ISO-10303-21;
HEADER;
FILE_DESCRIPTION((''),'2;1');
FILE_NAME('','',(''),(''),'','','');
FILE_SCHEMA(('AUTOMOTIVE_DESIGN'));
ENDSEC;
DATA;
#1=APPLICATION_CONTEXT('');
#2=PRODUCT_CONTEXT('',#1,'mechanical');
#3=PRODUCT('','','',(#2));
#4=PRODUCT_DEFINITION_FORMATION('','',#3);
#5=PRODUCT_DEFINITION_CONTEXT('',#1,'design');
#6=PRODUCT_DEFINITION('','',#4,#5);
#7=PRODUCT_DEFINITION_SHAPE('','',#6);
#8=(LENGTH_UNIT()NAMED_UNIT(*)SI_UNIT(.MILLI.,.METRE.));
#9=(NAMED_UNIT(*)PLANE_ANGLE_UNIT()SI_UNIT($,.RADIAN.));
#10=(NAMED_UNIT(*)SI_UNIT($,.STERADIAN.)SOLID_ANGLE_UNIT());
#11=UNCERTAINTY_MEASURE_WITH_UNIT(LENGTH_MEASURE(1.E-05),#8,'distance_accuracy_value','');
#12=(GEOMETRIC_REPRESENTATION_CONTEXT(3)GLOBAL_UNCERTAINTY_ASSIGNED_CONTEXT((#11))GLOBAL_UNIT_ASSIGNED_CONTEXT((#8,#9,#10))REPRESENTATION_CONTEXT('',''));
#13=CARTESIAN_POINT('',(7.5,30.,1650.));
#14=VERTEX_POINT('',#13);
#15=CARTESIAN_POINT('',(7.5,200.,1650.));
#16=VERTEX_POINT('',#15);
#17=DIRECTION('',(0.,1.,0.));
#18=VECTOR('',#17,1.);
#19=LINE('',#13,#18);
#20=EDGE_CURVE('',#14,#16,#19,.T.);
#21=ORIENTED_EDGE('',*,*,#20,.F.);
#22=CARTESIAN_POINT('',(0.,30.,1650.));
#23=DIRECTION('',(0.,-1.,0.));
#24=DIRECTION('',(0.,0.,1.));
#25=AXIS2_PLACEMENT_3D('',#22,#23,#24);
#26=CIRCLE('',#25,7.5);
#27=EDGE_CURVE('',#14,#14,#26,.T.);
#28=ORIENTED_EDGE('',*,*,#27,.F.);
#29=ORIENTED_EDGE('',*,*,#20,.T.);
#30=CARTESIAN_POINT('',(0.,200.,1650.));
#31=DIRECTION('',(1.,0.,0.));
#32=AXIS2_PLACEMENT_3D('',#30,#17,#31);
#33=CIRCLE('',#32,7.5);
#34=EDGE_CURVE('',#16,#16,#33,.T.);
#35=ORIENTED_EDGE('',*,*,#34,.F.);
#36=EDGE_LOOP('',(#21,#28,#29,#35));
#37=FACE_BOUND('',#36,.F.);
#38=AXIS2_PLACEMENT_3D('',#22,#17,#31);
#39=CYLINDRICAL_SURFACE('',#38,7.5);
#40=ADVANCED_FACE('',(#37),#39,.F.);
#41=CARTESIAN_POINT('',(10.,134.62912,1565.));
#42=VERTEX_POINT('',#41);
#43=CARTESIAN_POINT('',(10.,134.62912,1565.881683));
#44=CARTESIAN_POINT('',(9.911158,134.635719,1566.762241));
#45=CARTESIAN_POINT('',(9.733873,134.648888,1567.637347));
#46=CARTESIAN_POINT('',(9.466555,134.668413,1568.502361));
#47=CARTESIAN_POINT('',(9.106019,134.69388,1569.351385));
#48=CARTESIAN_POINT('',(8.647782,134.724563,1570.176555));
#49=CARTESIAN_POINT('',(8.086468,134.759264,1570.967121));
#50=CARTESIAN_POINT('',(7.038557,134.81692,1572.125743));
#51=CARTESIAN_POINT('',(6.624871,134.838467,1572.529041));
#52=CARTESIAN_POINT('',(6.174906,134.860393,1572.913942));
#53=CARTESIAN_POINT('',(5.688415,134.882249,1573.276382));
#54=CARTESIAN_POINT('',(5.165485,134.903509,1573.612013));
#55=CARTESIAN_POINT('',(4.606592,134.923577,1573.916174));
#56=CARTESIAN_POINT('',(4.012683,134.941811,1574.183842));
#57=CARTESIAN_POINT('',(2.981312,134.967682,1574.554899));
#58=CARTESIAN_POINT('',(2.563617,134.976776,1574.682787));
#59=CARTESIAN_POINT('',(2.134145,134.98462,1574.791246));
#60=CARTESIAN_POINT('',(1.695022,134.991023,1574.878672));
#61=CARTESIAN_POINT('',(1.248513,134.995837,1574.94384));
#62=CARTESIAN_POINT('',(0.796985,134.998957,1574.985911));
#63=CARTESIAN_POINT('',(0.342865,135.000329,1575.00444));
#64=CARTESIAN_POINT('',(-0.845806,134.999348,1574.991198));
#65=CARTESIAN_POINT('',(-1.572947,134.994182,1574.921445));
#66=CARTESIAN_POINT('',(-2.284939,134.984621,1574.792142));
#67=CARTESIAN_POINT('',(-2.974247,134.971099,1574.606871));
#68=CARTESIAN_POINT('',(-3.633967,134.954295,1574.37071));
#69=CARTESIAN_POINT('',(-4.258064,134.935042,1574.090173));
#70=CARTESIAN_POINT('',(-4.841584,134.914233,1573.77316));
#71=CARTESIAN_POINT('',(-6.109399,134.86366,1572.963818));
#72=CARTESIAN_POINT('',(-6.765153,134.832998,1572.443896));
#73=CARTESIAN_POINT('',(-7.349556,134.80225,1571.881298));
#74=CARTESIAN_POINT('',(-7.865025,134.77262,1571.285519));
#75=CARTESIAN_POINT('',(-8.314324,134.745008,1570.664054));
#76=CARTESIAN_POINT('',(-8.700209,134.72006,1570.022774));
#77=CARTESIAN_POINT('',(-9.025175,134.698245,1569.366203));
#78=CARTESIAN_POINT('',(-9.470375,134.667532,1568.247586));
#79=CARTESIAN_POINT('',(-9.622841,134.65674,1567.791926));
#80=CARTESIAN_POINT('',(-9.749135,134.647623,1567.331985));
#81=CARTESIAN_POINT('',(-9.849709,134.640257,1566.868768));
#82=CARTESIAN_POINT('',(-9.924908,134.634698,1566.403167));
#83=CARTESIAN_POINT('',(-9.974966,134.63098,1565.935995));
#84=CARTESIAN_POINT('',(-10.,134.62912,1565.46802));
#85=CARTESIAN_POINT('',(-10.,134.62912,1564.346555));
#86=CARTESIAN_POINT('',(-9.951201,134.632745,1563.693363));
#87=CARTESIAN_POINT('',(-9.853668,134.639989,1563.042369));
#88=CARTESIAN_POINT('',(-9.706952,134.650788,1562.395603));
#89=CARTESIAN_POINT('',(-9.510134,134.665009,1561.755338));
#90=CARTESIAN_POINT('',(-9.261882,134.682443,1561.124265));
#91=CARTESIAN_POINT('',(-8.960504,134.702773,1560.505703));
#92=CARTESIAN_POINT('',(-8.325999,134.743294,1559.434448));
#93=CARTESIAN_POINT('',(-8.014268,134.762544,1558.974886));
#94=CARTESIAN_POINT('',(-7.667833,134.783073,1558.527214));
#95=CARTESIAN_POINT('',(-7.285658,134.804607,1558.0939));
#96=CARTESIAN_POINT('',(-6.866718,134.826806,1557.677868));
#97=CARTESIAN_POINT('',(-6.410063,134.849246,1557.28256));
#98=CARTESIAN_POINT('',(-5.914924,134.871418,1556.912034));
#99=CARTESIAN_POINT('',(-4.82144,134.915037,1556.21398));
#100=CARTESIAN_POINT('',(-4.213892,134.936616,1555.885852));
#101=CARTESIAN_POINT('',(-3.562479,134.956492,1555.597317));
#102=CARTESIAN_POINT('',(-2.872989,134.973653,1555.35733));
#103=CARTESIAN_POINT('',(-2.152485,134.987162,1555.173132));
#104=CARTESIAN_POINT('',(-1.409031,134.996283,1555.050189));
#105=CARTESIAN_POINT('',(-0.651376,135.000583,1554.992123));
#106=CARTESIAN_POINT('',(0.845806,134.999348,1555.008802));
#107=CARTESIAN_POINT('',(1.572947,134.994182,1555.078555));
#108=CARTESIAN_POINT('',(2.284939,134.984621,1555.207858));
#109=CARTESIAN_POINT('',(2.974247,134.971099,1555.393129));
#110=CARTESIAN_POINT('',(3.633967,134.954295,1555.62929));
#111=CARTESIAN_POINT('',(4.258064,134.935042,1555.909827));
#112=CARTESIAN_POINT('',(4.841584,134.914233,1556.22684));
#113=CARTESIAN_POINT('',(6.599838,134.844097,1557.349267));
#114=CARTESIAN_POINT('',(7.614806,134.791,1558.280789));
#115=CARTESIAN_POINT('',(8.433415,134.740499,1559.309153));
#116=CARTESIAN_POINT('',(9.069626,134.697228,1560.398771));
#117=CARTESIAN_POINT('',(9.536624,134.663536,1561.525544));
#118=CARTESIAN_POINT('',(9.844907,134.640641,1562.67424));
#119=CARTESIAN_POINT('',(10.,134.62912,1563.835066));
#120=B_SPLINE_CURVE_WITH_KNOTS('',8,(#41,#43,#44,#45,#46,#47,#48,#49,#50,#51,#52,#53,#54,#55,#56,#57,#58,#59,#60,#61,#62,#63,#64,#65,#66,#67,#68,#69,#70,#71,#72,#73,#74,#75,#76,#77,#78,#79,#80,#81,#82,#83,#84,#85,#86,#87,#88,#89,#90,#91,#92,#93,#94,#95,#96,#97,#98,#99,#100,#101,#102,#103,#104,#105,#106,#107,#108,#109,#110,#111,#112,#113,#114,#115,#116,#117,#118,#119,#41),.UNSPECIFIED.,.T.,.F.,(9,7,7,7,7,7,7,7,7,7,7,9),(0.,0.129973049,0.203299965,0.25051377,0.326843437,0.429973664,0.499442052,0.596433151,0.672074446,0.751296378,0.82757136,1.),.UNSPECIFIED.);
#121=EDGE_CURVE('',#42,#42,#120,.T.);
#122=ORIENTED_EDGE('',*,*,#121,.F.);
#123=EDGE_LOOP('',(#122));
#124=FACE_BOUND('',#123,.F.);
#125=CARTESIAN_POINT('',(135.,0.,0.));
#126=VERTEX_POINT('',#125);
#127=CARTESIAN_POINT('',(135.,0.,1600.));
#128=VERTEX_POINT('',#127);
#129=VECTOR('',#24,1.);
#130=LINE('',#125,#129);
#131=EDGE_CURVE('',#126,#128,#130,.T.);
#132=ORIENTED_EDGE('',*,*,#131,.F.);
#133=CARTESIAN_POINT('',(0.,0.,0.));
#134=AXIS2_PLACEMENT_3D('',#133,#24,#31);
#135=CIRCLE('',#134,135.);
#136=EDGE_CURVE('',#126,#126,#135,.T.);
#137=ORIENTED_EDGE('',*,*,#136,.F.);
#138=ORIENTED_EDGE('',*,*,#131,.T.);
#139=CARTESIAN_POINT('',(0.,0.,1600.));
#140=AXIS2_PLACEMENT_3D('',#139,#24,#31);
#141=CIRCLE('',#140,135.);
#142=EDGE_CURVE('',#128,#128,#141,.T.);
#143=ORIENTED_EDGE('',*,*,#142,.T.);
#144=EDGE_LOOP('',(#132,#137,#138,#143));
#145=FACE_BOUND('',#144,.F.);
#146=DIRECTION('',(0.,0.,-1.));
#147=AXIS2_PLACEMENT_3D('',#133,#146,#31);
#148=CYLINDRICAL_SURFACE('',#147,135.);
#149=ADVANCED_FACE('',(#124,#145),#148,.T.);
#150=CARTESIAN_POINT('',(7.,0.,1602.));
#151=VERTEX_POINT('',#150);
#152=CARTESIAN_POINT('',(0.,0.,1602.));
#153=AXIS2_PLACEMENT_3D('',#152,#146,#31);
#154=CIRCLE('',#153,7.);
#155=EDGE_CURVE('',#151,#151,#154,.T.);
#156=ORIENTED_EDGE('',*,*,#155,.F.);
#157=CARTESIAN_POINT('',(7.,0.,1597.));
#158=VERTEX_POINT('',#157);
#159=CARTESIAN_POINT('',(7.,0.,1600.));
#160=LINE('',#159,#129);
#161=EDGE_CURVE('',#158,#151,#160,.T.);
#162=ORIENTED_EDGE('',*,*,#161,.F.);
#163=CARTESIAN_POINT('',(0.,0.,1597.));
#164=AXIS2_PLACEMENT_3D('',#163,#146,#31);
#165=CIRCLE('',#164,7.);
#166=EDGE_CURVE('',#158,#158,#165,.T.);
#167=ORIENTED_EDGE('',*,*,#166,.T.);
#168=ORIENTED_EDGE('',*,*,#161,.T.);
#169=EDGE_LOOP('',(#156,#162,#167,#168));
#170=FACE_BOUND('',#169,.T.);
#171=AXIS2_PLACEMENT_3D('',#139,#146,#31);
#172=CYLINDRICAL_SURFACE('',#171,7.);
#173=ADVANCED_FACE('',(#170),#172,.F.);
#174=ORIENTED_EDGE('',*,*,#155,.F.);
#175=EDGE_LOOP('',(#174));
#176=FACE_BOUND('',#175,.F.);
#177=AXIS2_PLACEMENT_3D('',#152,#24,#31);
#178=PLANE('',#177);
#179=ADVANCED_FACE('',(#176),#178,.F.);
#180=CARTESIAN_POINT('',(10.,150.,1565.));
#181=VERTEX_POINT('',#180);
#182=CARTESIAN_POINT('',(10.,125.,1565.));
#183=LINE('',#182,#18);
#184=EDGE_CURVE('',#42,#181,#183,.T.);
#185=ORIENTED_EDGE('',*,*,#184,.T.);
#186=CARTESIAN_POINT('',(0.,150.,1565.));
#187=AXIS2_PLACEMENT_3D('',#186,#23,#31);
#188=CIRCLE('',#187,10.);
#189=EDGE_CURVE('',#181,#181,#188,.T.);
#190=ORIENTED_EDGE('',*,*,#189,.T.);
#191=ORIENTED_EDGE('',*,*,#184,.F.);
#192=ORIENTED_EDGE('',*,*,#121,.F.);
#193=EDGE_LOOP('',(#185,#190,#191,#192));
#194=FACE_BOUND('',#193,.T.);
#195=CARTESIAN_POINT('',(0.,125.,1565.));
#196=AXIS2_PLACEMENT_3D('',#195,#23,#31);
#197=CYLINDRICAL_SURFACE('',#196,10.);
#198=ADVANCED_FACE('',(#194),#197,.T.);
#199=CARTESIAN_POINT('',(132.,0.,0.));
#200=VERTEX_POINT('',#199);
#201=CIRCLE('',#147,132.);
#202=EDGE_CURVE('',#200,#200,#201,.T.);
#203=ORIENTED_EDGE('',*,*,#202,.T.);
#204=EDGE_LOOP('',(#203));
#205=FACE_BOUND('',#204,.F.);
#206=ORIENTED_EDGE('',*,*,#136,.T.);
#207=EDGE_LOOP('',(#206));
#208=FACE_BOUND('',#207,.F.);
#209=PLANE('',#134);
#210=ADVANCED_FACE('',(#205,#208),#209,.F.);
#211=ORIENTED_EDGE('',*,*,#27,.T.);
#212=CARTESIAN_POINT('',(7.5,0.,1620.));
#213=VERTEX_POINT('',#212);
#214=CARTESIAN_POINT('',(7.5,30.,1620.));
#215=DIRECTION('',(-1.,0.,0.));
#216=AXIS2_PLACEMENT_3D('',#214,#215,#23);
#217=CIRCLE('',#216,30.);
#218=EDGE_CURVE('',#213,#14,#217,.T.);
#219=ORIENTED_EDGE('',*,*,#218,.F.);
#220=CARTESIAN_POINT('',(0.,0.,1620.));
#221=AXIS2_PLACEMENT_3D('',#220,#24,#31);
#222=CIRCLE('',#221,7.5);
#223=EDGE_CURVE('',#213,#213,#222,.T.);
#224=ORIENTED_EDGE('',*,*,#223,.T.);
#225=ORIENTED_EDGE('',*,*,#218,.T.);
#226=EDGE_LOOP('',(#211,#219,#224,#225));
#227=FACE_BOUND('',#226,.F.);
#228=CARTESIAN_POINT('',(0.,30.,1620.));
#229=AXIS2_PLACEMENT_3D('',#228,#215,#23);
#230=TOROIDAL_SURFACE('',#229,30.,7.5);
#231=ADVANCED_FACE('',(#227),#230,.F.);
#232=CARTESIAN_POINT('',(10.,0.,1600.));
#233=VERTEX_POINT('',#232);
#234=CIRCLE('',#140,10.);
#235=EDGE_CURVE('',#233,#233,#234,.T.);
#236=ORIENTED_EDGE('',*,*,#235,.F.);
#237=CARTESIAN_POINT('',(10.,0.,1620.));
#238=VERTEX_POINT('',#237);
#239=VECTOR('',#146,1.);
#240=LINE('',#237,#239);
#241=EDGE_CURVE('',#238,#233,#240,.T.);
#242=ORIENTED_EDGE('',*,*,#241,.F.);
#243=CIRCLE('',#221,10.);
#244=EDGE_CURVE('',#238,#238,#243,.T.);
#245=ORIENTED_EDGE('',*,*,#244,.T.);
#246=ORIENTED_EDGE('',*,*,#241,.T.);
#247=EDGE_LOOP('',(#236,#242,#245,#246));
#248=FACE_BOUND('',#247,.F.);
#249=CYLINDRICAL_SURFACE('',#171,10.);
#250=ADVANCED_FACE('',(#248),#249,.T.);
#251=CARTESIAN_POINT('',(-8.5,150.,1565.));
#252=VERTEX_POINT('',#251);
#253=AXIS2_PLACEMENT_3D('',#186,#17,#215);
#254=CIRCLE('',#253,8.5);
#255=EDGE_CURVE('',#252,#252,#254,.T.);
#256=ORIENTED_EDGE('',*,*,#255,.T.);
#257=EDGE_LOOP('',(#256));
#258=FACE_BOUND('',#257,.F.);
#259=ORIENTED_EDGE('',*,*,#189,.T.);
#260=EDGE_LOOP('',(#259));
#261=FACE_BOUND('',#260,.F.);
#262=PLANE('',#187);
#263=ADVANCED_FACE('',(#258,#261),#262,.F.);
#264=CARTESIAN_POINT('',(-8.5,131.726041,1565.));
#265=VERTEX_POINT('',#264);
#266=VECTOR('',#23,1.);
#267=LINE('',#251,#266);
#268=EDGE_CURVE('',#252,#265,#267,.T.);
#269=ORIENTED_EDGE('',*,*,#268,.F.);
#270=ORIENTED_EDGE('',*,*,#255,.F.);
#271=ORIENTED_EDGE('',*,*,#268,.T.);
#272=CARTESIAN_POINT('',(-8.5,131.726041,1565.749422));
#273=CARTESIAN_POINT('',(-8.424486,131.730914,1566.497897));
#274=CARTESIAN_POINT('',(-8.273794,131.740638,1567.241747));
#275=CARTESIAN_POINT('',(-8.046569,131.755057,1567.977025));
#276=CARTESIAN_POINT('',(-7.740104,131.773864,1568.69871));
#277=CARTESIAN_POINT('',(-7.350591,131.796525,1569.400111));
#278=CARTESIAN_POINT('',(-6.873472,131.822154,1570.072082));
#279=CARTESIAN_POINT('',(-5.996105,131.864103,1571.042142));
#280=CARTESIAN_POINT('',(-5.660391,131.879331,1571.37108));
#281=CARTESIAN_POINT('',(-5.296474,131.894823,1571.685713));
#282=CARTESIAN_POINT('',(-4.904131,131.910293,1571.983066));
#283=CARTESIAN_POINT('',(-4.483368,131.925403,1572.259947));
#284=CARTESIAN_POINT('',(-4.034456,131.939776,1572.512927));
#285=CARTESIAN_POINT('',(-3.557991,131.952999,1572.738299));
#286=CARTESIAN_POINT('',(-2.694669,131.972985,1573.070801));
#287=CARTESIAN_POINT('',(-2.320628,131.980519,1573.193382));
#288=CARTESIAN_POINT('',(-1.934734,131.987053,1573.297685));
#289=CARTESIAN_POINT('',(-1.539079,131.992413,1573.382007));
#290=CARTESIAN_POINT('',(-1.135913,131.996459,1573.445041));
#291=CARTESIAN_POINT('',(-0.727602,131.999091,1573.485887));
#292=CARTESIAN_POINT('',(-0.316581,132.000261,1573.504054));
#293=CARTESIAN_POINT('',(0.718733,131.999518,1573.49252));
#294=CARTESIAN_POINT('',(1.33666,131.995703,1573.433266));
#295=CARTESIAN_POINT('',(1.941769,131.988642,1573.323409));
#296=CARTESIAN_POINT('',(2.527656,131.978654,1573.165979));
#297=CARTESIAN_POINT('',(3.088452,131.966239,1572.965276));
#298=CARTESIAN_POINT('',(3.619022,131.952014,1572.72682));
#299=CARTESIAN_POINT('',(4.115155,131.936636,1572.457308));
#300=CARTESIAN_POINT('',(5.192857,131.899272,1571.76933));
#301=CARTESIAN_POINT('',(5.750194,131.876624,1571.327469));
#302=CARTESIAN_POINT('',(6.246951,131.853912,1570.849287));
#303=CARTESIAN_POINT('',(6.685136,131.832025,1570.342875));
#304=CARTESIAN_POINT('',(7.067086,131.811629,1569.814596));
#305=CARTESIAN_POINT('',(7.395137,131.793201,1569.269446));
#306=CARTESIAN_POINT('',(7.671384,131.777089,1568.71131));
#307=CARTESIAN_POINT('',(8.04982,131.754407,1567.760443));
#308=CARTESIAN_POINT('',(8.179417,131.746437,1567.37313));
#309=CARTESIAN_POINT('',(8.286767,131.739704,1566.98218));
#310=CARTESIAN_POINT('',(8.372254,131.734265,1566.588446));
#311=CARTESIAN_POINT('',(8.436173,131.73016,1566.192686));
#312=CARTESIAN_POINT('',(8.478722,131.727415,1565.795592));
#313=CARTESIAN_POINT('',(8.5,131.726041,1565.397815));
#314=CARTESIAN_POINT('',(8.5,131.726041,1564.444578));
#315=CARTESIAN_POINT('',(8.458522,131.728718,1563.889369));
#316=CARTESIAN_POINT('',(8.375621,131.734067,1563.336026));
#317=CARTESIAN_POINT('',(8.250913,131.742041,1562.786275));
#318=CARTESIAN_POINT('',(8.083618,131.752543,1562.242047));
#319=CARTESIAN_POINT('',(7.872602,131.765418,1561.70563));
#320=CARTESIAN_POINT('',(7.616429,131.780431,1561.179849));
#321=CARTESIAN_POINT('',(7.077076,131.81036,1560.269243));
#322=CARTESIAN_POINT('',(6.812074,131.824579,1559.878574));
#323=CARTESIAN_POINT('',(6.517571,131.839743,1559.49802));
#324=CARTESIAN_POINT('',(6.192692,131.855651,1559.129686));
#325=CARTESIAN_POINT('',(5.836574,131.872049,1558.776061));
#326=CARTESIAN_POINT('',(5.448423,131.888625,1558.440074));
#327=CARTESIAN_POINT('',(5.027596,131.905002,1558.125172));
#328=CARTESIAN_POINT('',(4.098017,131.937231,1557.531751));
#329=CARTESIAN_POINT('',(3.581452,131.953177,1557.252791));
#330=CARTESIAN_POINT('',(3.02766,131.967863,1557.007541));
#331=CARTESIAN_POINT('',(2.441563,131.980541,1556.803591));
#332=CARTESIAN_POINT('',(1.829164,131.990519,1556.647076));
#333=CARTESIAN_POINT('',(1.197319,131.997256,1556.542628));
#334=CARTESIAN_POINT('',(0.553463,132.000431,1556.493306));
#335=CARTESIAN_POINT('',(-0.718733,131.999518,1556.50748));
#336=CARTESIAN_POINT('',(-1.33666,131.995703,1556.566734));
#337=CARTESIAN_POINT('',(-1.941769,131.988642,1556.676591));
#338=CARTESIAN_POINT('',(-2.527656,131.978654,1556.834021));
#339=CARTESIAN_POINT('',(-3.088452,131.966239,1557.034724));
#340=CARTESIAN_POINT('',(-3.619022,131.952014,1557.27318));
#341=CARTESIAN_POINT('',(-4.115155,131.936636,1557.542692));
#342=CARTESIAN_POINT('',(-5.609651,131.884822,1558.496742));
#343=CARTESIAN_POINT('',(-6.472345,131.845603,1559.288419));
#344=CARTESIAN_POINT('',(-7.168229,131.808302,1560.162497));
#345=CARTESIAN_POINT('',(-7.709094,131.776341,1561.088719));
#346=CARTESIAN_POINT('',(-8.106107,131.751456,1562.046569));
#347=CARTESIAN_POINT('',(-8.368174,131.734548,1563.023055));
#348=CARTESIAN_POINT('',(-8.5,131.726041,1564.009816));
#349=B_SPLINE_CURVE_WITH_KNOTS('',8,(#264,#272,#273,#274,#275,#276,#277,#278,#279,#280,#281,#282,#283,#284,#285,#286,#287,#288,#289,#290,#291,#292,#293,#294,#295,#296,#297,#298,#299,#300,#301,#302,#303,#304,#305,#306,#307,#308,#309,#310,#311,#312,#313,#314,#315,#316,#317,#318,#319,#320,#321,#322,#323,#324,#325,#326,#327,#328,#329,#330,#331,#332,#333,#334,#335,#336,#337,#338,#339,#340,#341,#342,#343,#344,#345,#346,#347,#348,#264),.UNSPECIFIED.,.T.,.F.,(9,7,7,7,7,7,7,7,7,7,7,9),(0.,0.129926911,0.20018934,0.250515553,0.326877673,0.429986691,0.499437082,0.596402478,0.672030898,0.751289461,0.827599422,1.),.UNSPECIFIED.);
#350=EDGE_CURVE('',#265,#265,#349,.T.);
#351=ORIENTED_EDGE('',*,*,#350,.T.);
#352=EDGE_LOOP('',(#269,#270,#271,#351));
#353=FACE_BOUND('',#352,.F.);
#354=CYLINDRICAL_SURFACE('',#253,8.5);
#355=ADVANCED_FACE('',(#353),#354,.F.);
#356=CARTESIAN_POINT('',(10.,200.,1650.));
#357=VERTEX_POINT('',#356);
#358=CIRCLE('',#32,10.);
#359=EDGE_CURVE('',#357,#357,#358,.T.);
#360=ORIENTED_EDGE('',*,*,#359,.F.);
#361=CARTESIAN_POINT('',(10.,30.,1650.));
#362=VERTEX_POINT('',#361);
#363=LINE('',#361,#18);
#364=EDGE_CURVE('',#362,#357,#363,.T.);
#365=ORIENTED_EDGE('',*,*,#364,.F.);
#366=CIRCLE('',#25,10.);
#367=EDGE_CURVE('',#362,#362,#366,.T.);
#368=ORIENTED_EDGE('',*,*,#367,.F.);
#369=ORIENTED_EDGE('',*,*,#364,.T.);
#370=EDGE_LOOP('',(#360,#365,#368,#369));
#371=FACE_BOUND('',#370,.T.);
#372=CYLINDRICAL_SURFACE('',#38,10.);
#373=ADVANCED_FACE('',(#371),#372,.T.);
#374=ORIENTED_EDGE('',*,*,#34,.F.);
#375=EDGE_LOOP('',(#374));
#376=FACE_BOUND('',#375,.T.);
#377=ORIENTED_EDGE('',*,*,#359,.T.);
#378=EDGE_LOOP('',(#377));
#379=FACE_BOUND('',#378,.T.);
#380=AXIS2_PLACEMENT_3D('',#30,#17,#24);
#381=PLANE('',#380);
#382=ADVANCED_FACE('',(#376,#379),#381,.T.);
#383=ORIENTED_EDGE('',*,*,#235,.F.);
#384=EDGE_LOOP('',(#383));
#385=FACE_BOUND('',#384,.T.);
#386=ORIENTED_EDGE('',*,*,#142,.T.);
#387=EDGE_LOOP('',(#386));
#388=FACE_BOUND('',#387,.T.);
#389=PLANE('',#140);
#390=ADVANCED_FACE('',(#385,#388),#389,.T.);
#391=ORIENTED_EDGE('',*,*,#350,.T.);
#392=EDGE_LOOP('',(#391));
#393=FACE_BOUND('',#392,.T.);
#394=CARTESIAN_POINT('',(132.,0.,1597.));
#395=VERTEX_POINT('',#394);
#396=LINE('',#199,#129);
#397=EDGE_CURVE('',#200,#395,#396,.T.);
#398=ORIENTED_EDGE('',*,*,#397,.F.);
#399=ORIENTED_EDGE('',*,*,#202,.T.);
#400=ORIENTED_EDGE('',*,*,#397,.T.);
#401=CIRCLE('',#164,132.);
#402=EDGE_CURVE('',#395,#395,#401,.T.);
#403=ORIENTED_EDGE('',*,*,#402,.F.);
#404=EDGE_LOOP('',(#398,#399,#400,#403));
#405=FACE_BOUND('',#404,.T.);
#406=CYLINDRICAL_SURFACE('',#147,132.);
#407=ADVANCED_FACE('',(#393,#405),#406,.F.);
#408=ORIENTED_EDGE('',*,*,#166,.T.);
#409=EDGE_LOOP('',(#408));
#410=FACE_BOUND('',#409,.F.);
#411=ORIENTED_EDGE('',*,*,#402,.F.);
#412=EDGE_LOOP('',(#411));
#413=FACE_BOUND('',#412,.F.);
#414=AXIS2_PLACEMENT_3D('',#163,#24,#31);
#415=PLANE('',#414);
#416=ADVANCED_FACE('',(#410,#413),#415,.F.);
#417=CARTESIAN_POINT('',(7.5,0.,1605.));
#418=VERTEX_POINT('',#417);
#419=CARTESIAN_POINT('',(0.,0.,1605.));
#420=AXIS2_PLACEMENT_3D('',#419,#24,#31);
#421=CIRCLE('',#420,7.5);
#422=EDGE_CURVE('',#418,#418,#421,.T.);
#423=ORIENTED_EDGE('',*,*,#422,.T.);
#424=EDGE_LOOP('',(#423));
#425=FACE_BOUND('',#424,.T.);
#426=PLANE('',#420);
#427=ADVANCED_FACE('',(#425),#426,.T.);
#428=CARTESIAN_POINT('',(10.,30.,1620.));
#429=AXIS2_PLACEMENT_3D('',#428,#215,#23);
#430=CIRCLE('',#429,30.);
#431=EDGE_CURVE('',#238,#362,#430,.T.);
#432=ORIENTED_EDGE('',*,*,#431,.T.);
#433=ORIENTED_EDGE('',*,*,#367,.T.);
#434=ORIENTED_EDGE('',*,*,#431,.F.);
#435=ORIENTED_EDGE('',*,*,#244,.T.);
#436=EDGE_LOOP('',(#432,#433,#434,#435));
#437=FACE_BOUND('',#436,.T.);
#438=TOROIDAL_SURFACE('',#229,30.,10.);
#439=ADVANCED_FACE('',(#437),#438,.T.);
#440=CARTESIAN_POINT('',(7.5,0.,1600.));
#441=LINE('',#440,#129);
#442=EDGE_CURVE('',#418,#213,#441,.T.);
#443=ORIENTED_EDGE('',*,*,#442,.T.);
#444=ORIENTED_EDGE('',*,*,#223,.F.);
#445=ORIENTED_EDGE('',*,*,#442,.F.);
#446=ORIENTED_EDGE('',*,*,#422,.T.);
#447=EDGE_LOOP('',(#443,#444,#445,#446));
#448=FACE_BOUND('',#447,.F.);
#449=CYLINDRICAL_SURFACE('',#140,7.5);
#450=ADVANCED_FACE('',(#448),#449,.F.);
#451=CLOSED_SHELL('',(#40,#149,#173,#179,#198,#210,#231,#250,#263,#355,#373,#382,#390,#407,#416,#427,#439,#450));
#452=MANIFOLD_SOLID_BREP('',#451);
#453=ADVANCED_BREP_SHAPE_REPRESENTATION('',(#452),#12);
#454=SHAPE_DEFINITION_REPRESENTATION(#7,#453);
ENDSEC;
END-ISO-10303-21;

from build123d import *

# Parameters (mm, degrees)
F0_R      = 135
F1_DEPTH  = 1600
F2_R      = 10
F6_DEPTH  = 5
F5_R      = 10
F7_DEPTH  = 25
F8_T      = -3
F9_R      = 8.5
F10_DEPTH = 50
F11_R     = 10
F11_R_2   = 7.5


with BuildPart() as f1:
    # F0 (on Top) → F1 (new body)
    with BuildSketch(Plane.XY):
        Circle(F0_R)
    extrude(amount=F1_DEPTH)

    # F2 (on face) → F6 (join)
    with BuildSketch(Plane.XY.offset(1600)):
        Circle(F2_R)
    extrude(amount=F6_DEPTH)

    # F5 (on offset) → F7 (join)
    with BuildSketch(Plane.XZ.offset(-125)):
        with Locations((0, 1565)):
            Circle(F5_R)
    extrude(amount=-F7_DEPTH)

    # F8
    f8_openings = [f1.faces().sort_by_distance(p)[0] for p in [
        (0, 0, 0),
    ]]
    offset(amount=F8_T, openings=f8_openings, kind=Kind.INTERSECTION)

    # F9 (on face) → F10 (cut)
    with BuildSketch(Plane(origin=(0, 150, 0), x_dir=(-1, 0, 0), z_dir=(0, 1, 0))):
        with Locations((0, 1565)):
            Circle(F9_R)
    extrude(amount=-F10_DEPTH, mode=Mode.SUBTRACT)

    # F12: sweep along a path in F3
    with BuildLine(Plane.YZ) as f12_path:
        Line((0, 1600), (0, 1620))
        ThreePointArc((0, 1620), (8.7867965644, 1641.2132034356), (30, 1650))
        Line((30, 1650), (200, 1650))
    # F11 (on face) → F12 (sweep)
    with BuildSketch(Plane.XY.offset(1605)):
        Circle(F11_R)
        Circle(F11_R_2, mode=Mode.SUBTRACT)
    sweep(path=f12_path.line)


solid = f1.part
